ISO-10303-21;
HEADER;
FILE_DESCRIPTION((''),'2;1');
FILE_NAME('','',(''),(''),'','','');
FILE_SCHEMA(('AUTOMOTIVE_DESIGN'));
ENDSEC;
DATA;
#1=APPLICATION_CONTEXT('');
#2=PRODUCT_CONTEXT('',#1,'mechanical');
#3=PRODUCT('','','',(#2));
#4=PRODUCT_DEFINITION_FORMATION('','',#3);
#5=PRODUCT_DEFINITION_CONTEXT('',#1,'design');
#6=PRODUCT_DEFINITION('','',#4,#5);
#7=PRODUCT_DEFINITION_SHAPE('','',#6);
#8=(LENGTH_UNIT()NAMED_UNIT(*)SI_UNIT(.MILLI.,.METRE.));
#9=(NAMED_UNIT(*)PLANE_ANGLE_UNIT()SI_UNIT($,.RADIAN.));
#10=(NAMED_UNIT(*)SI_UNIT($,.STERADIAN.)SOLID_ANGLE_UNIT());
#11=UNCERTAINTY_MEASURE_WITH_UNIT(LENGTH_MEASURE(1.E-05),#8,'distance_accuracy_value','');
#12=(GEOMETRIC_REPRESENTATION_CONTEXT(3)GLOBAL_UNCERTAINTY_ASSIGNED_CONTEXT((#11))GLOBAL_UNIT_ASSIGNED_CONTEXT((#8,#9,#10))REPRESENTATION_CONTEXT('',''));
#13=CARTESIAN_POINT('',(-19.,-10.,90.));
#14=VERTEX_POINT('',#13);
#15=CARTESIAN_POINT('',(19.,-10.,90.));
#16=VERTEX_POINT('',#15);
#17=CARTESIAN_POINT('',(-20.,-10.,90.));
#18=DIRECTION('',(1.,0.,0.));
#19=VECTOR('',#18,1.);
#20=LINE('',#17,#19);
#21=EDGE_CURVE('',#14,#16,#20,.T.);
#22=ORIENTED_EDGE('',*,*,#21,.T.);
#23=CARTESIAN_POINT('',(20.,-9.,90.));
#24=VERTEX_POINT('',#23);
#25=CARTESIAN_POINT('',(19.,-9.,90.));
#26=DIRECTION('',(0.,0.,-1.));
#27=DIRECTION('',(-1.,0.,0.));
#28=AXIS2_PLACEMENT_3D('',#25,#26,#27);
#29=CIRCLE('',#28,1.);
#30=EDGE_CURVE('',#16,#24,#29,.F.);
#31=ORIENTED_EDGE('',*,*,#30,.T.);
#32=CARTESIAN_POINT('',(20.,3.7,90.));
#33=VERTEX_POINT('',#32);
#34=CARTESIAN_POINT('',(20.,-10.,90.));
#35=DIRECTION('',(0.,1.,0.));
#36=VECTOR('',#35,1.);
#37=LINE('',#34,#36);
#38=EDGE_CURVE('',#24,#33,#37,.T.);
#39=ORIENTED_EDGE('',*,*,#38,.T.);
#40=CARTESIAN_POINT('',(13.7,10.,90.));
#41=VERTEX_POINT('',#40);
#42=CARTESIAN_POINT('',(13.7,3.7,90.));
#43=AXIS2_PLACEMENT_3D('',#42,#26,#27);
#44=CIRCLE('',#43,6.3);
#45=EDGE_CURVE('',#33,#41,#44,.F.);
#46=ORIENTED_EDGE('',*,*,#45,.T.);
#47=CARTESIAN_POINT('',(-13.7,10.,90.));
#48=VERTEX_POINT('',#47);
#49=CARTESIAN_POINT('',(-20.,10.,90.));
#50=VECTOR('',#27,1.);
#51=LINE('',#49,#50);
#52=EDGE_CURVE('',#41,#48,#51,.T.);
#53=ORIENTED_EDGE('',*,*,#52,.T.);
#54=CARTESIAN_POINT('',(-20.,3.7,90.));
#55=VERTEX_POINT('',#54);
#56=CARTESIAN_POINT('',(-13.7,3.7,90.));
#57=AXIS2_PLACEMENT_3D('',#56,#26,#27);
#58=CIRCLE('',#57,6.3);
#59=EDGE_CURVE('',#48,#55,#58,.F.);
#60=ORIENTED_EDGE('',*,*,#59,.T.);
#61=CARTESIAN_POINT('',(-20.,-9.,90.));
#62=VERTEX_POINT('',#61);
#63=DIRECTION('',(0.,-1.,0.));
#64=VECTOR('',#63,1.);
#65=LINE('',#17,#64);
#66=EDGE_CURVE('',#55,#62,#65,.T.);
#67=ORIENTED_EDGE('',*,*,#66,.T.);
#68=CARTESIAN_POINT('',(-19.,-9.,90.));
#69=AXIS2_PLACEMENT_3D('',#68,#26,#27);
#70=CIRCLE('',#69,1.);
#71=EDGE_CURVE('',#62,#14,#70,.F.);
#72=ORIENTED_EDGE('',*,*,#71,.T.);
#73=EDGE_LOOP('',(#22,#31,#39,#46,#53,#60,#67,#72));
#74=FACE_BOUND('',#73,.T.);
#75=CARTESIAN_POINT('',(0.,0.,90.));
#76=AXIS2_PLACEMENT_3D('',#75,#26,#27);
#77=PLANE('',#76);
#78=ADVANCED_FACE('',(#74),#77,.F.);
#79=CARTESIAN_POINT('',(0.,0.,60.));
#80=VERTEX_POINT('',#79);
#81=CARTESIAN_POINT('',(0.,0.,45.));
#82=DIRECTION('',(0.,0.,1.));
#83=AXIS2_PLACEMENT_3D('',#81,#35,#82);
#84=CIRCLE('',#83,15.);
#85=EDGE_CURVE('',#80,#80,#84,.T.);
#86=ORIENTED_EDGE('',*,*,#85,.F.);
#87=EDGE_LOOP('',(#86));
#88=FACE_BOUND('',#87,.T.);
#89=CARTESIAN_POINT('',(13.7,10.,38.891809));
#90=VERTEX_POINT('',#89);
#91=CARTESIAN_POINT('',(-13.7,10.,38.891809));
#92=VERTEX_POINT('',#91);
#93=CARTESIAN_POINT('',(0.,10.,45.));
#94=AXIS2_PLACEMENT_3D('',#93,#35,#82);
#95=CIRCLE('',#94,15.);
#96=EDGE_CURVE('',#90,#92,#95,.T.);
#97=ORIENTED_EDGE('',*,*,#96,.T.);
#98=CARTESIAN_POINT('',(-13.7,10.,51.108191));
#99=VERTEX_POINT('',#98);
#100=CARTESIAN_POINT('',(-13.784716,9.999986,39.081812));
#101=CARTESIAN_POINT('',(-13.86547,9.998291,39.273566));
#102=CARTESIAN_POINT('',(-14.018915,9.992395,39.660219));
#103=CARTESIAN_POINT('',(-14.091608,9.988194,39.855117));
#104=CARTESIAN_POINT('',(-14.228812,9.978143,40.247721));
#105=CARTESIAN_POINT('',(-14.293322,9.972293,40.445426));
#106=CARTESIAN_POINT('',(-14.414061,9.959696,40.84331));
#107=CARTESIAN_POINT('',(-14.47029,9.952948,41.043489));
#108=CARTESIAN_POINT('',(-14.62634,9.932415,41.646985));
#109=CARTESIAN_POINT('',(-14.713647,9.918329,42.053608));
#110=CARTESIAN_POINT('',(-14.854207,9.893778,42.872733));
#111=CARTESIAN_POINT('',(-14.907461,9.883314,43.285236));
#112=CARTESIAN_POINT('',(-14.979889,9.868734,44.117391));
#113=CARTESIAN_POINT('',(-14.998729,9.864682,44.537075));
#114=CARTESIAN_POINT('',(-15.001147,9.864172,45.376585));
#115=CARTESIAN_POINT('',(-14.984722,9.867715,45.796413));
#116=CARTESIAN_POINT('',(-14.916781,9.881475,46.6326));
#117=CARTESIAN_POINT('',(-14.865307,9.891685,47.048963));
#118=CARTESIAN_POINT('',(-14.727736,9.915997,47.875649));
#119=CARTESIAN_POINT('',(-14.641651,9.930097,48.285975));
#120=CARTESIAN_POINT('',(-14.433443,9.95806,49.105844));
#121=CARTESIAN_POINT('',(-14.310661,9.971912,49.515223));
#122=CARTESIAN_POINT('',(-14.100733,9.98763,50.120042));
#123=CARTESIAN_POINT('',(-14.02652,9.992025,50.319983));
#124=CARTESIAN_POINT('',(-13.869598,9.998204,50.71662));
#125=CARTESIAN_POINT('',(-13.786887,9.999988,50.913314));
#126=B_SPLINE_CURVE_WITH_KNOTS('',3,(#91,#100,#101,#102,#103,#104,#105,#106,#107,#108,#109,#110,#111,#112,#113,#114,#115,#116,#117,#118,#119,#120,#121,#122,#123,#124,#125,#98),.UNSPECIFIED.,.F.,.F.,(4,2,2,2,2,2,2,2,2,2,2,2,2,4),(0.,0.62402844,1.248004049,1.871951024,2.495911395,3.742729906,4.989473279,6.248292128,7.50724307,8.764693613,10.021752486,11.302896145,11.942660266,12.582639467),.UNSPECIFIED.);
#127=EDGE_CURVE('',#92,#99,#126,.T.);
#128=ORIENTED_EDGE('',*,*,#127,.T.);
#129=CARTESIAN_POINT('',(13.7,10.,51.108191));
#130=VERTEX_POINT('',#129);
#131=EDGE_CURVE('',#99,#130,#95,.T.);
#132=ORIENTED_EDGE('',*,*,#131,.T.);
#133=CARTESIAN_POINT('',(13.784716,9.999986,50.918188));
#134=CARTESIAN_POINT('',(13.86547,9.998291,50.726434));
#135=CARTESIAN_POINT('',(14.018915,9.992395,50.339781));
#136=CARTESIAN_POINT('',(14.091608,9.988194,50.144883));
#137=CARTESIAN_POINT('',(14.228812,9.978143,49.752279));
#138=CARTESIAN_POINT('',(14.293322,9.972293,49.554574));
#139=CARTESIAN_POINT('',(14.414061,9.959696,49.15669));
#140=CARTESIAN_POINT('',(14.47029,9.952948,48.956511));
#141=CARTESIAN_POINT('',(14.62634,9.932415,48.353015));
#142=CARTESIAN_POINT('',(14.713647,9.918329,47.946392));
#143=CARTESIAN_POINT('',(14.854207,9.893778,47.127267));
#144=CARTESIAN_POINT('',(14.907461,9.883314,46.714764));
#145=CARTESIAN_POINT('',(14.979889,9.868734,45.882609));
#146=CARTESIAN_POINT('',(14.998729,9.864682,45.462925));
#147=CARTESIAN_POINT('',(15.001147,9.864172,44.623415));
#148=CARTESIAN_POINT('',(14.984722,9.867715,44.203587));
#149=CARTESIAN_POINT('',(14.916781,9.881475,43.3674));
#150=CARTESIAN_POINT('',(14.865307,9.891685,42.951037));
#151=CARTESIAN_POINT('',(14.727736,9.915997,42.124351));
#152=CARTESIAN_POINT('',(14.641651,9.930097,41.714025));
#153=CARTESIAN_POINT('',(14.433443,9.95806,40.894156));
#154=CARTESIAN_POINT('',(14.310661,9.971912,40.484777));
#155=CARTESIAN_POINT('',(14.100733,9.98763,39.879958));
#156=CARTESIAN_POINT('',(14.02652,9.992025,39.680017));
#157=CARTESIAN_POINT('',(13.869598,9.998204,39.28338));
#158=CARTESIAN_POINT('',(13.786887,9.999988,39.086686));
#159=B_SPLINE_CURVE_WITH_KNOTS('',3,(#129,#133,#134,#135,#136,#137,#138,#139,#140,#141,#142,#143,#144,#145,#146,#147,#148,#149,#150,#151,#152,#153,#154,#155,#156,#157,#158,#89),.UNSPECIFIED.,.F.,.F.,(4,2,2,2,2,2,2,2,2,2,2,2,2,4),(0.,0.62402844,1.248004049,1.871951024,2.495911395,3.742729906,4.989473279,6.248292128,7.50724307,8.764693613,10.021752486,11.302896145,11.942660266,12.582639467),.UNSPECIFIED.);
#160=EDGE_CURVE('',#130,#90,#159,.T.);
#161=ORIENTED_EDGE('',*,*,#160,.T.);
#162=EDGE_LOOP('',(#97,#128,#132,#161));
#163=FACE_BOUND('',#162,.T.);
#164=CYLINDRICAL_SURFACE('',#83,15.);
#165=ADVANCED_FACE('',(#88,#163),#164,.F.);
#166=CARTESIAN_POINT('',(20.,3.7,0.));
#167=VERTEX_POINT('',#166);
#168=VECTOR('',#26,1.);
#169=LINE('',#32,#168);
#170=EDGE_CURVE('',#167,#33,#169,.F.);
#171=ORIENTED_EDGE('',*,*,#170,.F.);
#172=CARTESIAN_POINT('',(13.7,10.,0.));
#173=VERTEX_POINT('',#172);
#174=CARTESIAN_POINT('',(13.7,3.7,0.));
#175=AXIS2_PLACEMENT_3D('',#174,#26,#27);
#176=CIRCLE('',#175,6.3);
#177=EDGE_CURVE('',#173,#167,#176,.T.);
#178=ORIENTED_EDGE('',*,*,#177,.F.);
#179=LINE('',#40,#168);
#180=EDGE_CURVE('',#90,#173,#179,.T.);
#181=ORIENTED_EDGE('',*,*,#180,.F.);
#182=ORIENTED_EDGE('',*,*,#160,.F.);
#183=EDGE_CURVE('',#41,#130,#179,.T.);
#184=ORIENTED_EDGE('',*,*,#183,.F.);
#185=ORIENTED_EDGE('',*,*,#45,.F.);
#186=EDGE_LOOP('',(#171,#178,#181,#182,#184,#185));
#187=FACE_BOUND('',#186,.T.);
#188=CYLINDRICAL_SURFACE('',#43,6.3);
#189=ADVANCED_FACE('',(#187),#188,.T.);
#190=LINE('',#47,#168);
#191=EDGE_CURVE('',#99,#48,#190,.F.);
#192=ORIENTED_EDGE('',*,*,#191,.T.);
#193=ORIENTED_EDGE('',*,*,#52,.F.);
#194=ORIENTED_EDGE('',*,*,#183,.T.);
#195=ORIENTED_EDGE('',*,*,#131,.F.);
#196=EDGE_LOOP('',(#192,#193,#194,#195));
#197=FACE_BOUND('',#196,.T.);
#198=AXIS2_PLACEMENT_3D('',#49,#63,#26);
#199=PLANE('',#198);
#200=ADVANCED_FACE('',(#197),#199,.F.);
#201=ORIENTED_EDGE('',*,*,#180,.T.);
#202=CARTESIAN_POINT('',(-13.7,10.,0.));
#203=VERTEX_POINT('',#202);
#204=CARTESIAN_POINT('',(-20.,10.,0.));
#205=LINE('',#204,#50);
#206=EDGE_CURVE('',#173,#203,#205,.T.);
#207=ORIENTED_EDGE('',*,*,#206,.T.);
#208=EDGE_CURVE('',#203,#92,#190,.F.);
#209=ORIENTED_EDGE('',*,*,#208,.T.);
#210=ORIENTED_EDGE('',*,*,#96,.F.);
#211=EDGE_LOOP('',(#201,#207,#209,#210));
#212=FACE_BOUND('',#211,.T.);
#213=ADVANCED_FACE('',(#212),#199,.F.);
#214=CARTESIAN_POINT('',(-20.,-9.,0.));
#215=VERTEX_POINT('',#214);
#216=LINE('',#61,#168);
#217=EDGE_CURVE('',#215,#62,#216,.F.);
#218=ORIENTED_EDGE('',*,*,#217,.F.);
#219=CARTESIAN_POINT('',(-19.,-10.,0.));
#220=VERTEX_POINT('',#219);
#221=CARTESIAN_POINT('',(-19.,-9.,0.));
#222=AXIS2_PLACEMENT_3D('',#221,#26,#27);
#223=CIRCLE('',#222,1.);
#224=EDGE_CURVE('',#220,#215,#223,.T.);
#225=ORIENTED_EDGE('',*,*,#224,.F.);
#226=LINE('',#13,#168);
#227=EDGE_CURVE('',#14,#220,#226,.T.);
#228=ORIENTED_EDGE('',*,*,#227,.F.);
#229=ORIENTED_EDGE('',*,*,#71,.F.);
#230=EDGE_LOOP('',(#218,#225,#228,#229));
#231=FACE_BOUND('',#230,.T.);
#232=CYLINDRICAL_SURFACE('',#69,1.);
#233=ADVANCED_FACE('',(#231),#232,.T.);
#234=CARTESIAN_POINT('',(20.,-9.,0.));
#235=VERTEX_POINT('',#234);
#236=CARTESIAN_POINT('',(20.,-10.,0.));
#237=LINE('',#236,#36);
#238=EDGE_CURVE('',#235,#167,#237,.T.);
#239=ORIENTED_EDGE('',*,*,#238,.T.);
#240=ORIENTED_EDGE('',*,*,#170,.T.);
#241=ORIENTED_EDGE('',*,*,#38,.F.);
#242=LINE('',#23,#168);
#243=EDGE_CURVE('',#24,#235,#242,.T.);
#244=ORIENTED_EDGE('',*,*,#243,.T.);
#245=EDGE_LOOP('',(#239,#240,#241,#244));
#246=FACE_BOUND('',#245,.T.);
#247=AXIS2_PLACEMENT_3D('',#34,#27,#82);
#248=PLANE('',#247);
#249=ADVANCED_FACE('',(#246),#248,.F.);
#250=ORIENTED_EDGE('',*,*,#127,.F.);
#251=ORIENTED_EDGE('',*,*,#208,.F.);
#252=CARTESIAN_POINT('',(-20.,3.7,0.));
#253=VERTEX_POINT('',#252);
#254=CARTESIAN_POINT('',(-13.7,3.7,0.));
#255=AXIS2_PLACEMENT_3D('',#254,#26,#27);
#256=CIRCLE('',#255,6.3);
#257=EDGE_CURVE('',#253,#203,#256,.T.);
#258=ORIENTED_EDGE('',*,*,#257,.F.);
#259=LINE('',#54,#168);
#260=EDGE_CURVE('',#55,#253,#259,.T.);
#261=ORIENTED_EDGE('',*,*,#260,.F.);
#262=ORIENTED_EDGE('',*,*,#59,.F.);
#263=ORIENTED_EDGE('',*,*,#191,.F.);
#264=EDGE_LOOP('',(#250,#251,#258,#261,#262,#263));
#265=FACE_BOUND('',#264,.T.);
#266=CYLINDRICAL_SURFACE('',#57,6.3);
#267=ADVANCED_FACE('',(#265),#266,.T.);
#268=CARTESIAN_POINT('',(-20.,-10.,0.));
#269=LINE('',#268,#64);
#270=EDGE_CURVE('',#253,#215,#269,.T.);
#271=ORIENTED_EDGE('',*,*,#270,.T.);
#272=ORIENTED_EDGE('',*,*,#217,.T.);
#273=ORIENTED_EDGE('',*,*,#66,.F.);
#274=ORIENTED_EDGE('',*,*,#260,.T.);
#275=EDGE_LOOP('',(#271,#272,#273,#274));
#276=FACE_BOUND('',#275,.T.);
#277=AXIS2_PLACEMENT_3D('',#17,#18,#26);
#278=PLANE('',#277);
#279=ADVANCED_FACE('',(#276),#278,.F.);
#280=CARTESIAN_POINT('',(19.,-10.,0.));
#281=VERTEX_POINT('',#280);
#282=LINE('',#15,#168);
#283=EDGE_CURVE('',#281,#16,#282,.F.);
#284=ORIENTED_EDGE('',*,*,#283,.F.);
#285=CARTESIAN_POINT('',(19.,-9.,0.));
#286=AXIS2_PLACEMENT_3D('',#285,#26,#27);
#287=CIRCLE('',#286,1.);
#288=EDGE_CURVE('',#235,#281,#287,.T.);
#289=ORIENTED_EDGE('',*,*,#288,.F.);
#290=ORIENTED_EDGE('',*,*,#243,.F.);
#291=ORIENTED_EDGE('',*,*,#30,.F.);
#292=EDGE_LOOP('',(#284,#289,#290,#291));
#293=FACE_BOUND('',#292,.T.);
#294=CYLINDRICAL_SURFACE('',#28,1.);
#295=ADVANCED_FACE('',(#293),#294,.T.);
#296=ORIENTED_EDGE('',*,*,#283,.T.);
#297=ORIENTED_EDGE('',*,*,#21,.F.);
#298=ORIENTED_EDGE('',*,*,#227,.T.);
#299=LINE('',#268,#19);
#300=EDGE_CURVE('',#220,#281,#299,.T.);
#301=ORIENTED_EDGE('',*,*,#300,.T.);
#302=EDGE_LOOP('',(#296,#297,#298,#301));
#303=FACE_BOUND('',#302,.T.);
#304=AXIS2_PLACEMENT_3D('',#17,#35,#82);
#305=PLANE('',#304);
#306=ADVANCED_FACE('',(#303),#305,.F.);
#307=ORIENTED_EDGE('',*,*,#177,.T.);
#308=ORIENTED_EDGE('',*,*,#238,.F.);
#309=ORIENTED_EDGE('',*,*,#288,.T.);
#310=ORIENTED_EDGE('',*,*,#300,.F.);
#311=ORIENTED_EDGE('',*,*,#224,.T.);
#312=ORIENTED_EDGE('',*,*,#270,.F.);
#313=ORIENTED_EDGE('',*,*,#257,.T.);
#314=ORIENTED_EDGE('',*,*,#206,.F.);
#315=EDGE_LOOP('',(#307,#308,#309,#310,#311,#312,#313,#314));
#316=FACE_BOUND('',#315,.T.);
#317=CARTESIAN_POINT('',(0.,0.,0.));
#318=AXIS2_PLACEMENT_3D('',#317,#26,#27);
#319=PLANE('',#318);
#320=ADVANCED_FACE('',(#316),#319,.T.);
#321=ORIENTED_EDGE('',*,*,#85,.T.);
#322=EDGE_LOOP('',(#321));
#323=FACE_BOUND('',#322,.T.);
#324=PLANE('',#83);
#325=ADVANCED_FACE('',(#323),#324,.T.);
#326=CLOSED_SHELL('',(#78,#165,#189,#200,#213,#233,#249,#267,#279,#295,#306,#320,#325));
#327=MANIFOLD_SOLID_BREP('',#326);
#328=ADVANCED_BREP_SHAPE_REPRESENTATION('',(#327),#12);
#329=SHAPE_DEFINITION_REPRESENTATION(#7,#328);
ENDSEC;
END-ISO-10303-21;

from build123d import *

# Parameters (mm, degrees)
SKETCH1_W           = 40
SKETCH1_H           = 20
BOSS_EXTRUDE1_DEPTH = 90
FILLET1_R           = 1
SKETCH2_R           = 15
CUT_EXTRUDE1_DEPTH  = 10
FILLET2_R           = 6.3


with BuildPart() as part:
    # Sketch1 → Boss-Extrude1 (new body)
    with BuildSketch(Plane.XY):
        Rectangle(SKETCH1_W, SKETCH1_H)
    extrude(amount=BOSS_EXTRUDE1_DEPTH)

    # Fillet1
    fillet1_edges = [part.edges().sort_by_distance(p)[0] for p in [
        (20, -10, 45),
        (-20, -10, 45),
    ]]
    fillet(fillet1_edges, radius=FILLET1_R)

    # Sketch2 → Cut-Extrude1 (cut)
    with BuildSketch(Plane(origin=(0, 10, 0), x_dir=(1, 0, 0), z_dir=(0, 1, 0))):
        with Locations(Location((0, -45, 0), (0, 0, 270))):
            Circle(SKETCH2_R)
    extrude(amount=-CUT_EXTRUDE1_DEPTH, mode=Mode.SUBTRACT)

    # Fillet2
    # the kernel refuses this fillet: 6.3 mm, written as the material it takes off along each edge
    with BuildSketch(Plane(origin=(-20, 10, -15.75), x_dir=(0, -1, 0), z_dir=(0, 0, 1))) as fillet2_piece_1:
        with BuildLine():
            CenterArc((FILLET2_R, FILLET2_R), FILLET2_R, 180, 90)
            Line((0, FILLET2_R), (0, 0))
            Line((0, 0), (FILLET2_R, 0))
        make_face()
    extrude(amount=121.5, mode=Mode.SUBTRACT)
    with BuildSketch(Plane(origin=(20, 10, -15.75), x_dir=(0, -1, 0), z_dir=(0, 0, 1))) as fillet2_piece_2:
        with BuildLine():
            CenterArc((FILLET2_R, -FILLET2_R), FILLET2_R, 90, 90)
            Line((0, -FILLET2_R), (0, 0))
            Line((0, 0), (FILLET2_R, 0))
        make_face()
    extrude(amount=121.5, mode=Mode.SUBTRACT)


solid = part.part
